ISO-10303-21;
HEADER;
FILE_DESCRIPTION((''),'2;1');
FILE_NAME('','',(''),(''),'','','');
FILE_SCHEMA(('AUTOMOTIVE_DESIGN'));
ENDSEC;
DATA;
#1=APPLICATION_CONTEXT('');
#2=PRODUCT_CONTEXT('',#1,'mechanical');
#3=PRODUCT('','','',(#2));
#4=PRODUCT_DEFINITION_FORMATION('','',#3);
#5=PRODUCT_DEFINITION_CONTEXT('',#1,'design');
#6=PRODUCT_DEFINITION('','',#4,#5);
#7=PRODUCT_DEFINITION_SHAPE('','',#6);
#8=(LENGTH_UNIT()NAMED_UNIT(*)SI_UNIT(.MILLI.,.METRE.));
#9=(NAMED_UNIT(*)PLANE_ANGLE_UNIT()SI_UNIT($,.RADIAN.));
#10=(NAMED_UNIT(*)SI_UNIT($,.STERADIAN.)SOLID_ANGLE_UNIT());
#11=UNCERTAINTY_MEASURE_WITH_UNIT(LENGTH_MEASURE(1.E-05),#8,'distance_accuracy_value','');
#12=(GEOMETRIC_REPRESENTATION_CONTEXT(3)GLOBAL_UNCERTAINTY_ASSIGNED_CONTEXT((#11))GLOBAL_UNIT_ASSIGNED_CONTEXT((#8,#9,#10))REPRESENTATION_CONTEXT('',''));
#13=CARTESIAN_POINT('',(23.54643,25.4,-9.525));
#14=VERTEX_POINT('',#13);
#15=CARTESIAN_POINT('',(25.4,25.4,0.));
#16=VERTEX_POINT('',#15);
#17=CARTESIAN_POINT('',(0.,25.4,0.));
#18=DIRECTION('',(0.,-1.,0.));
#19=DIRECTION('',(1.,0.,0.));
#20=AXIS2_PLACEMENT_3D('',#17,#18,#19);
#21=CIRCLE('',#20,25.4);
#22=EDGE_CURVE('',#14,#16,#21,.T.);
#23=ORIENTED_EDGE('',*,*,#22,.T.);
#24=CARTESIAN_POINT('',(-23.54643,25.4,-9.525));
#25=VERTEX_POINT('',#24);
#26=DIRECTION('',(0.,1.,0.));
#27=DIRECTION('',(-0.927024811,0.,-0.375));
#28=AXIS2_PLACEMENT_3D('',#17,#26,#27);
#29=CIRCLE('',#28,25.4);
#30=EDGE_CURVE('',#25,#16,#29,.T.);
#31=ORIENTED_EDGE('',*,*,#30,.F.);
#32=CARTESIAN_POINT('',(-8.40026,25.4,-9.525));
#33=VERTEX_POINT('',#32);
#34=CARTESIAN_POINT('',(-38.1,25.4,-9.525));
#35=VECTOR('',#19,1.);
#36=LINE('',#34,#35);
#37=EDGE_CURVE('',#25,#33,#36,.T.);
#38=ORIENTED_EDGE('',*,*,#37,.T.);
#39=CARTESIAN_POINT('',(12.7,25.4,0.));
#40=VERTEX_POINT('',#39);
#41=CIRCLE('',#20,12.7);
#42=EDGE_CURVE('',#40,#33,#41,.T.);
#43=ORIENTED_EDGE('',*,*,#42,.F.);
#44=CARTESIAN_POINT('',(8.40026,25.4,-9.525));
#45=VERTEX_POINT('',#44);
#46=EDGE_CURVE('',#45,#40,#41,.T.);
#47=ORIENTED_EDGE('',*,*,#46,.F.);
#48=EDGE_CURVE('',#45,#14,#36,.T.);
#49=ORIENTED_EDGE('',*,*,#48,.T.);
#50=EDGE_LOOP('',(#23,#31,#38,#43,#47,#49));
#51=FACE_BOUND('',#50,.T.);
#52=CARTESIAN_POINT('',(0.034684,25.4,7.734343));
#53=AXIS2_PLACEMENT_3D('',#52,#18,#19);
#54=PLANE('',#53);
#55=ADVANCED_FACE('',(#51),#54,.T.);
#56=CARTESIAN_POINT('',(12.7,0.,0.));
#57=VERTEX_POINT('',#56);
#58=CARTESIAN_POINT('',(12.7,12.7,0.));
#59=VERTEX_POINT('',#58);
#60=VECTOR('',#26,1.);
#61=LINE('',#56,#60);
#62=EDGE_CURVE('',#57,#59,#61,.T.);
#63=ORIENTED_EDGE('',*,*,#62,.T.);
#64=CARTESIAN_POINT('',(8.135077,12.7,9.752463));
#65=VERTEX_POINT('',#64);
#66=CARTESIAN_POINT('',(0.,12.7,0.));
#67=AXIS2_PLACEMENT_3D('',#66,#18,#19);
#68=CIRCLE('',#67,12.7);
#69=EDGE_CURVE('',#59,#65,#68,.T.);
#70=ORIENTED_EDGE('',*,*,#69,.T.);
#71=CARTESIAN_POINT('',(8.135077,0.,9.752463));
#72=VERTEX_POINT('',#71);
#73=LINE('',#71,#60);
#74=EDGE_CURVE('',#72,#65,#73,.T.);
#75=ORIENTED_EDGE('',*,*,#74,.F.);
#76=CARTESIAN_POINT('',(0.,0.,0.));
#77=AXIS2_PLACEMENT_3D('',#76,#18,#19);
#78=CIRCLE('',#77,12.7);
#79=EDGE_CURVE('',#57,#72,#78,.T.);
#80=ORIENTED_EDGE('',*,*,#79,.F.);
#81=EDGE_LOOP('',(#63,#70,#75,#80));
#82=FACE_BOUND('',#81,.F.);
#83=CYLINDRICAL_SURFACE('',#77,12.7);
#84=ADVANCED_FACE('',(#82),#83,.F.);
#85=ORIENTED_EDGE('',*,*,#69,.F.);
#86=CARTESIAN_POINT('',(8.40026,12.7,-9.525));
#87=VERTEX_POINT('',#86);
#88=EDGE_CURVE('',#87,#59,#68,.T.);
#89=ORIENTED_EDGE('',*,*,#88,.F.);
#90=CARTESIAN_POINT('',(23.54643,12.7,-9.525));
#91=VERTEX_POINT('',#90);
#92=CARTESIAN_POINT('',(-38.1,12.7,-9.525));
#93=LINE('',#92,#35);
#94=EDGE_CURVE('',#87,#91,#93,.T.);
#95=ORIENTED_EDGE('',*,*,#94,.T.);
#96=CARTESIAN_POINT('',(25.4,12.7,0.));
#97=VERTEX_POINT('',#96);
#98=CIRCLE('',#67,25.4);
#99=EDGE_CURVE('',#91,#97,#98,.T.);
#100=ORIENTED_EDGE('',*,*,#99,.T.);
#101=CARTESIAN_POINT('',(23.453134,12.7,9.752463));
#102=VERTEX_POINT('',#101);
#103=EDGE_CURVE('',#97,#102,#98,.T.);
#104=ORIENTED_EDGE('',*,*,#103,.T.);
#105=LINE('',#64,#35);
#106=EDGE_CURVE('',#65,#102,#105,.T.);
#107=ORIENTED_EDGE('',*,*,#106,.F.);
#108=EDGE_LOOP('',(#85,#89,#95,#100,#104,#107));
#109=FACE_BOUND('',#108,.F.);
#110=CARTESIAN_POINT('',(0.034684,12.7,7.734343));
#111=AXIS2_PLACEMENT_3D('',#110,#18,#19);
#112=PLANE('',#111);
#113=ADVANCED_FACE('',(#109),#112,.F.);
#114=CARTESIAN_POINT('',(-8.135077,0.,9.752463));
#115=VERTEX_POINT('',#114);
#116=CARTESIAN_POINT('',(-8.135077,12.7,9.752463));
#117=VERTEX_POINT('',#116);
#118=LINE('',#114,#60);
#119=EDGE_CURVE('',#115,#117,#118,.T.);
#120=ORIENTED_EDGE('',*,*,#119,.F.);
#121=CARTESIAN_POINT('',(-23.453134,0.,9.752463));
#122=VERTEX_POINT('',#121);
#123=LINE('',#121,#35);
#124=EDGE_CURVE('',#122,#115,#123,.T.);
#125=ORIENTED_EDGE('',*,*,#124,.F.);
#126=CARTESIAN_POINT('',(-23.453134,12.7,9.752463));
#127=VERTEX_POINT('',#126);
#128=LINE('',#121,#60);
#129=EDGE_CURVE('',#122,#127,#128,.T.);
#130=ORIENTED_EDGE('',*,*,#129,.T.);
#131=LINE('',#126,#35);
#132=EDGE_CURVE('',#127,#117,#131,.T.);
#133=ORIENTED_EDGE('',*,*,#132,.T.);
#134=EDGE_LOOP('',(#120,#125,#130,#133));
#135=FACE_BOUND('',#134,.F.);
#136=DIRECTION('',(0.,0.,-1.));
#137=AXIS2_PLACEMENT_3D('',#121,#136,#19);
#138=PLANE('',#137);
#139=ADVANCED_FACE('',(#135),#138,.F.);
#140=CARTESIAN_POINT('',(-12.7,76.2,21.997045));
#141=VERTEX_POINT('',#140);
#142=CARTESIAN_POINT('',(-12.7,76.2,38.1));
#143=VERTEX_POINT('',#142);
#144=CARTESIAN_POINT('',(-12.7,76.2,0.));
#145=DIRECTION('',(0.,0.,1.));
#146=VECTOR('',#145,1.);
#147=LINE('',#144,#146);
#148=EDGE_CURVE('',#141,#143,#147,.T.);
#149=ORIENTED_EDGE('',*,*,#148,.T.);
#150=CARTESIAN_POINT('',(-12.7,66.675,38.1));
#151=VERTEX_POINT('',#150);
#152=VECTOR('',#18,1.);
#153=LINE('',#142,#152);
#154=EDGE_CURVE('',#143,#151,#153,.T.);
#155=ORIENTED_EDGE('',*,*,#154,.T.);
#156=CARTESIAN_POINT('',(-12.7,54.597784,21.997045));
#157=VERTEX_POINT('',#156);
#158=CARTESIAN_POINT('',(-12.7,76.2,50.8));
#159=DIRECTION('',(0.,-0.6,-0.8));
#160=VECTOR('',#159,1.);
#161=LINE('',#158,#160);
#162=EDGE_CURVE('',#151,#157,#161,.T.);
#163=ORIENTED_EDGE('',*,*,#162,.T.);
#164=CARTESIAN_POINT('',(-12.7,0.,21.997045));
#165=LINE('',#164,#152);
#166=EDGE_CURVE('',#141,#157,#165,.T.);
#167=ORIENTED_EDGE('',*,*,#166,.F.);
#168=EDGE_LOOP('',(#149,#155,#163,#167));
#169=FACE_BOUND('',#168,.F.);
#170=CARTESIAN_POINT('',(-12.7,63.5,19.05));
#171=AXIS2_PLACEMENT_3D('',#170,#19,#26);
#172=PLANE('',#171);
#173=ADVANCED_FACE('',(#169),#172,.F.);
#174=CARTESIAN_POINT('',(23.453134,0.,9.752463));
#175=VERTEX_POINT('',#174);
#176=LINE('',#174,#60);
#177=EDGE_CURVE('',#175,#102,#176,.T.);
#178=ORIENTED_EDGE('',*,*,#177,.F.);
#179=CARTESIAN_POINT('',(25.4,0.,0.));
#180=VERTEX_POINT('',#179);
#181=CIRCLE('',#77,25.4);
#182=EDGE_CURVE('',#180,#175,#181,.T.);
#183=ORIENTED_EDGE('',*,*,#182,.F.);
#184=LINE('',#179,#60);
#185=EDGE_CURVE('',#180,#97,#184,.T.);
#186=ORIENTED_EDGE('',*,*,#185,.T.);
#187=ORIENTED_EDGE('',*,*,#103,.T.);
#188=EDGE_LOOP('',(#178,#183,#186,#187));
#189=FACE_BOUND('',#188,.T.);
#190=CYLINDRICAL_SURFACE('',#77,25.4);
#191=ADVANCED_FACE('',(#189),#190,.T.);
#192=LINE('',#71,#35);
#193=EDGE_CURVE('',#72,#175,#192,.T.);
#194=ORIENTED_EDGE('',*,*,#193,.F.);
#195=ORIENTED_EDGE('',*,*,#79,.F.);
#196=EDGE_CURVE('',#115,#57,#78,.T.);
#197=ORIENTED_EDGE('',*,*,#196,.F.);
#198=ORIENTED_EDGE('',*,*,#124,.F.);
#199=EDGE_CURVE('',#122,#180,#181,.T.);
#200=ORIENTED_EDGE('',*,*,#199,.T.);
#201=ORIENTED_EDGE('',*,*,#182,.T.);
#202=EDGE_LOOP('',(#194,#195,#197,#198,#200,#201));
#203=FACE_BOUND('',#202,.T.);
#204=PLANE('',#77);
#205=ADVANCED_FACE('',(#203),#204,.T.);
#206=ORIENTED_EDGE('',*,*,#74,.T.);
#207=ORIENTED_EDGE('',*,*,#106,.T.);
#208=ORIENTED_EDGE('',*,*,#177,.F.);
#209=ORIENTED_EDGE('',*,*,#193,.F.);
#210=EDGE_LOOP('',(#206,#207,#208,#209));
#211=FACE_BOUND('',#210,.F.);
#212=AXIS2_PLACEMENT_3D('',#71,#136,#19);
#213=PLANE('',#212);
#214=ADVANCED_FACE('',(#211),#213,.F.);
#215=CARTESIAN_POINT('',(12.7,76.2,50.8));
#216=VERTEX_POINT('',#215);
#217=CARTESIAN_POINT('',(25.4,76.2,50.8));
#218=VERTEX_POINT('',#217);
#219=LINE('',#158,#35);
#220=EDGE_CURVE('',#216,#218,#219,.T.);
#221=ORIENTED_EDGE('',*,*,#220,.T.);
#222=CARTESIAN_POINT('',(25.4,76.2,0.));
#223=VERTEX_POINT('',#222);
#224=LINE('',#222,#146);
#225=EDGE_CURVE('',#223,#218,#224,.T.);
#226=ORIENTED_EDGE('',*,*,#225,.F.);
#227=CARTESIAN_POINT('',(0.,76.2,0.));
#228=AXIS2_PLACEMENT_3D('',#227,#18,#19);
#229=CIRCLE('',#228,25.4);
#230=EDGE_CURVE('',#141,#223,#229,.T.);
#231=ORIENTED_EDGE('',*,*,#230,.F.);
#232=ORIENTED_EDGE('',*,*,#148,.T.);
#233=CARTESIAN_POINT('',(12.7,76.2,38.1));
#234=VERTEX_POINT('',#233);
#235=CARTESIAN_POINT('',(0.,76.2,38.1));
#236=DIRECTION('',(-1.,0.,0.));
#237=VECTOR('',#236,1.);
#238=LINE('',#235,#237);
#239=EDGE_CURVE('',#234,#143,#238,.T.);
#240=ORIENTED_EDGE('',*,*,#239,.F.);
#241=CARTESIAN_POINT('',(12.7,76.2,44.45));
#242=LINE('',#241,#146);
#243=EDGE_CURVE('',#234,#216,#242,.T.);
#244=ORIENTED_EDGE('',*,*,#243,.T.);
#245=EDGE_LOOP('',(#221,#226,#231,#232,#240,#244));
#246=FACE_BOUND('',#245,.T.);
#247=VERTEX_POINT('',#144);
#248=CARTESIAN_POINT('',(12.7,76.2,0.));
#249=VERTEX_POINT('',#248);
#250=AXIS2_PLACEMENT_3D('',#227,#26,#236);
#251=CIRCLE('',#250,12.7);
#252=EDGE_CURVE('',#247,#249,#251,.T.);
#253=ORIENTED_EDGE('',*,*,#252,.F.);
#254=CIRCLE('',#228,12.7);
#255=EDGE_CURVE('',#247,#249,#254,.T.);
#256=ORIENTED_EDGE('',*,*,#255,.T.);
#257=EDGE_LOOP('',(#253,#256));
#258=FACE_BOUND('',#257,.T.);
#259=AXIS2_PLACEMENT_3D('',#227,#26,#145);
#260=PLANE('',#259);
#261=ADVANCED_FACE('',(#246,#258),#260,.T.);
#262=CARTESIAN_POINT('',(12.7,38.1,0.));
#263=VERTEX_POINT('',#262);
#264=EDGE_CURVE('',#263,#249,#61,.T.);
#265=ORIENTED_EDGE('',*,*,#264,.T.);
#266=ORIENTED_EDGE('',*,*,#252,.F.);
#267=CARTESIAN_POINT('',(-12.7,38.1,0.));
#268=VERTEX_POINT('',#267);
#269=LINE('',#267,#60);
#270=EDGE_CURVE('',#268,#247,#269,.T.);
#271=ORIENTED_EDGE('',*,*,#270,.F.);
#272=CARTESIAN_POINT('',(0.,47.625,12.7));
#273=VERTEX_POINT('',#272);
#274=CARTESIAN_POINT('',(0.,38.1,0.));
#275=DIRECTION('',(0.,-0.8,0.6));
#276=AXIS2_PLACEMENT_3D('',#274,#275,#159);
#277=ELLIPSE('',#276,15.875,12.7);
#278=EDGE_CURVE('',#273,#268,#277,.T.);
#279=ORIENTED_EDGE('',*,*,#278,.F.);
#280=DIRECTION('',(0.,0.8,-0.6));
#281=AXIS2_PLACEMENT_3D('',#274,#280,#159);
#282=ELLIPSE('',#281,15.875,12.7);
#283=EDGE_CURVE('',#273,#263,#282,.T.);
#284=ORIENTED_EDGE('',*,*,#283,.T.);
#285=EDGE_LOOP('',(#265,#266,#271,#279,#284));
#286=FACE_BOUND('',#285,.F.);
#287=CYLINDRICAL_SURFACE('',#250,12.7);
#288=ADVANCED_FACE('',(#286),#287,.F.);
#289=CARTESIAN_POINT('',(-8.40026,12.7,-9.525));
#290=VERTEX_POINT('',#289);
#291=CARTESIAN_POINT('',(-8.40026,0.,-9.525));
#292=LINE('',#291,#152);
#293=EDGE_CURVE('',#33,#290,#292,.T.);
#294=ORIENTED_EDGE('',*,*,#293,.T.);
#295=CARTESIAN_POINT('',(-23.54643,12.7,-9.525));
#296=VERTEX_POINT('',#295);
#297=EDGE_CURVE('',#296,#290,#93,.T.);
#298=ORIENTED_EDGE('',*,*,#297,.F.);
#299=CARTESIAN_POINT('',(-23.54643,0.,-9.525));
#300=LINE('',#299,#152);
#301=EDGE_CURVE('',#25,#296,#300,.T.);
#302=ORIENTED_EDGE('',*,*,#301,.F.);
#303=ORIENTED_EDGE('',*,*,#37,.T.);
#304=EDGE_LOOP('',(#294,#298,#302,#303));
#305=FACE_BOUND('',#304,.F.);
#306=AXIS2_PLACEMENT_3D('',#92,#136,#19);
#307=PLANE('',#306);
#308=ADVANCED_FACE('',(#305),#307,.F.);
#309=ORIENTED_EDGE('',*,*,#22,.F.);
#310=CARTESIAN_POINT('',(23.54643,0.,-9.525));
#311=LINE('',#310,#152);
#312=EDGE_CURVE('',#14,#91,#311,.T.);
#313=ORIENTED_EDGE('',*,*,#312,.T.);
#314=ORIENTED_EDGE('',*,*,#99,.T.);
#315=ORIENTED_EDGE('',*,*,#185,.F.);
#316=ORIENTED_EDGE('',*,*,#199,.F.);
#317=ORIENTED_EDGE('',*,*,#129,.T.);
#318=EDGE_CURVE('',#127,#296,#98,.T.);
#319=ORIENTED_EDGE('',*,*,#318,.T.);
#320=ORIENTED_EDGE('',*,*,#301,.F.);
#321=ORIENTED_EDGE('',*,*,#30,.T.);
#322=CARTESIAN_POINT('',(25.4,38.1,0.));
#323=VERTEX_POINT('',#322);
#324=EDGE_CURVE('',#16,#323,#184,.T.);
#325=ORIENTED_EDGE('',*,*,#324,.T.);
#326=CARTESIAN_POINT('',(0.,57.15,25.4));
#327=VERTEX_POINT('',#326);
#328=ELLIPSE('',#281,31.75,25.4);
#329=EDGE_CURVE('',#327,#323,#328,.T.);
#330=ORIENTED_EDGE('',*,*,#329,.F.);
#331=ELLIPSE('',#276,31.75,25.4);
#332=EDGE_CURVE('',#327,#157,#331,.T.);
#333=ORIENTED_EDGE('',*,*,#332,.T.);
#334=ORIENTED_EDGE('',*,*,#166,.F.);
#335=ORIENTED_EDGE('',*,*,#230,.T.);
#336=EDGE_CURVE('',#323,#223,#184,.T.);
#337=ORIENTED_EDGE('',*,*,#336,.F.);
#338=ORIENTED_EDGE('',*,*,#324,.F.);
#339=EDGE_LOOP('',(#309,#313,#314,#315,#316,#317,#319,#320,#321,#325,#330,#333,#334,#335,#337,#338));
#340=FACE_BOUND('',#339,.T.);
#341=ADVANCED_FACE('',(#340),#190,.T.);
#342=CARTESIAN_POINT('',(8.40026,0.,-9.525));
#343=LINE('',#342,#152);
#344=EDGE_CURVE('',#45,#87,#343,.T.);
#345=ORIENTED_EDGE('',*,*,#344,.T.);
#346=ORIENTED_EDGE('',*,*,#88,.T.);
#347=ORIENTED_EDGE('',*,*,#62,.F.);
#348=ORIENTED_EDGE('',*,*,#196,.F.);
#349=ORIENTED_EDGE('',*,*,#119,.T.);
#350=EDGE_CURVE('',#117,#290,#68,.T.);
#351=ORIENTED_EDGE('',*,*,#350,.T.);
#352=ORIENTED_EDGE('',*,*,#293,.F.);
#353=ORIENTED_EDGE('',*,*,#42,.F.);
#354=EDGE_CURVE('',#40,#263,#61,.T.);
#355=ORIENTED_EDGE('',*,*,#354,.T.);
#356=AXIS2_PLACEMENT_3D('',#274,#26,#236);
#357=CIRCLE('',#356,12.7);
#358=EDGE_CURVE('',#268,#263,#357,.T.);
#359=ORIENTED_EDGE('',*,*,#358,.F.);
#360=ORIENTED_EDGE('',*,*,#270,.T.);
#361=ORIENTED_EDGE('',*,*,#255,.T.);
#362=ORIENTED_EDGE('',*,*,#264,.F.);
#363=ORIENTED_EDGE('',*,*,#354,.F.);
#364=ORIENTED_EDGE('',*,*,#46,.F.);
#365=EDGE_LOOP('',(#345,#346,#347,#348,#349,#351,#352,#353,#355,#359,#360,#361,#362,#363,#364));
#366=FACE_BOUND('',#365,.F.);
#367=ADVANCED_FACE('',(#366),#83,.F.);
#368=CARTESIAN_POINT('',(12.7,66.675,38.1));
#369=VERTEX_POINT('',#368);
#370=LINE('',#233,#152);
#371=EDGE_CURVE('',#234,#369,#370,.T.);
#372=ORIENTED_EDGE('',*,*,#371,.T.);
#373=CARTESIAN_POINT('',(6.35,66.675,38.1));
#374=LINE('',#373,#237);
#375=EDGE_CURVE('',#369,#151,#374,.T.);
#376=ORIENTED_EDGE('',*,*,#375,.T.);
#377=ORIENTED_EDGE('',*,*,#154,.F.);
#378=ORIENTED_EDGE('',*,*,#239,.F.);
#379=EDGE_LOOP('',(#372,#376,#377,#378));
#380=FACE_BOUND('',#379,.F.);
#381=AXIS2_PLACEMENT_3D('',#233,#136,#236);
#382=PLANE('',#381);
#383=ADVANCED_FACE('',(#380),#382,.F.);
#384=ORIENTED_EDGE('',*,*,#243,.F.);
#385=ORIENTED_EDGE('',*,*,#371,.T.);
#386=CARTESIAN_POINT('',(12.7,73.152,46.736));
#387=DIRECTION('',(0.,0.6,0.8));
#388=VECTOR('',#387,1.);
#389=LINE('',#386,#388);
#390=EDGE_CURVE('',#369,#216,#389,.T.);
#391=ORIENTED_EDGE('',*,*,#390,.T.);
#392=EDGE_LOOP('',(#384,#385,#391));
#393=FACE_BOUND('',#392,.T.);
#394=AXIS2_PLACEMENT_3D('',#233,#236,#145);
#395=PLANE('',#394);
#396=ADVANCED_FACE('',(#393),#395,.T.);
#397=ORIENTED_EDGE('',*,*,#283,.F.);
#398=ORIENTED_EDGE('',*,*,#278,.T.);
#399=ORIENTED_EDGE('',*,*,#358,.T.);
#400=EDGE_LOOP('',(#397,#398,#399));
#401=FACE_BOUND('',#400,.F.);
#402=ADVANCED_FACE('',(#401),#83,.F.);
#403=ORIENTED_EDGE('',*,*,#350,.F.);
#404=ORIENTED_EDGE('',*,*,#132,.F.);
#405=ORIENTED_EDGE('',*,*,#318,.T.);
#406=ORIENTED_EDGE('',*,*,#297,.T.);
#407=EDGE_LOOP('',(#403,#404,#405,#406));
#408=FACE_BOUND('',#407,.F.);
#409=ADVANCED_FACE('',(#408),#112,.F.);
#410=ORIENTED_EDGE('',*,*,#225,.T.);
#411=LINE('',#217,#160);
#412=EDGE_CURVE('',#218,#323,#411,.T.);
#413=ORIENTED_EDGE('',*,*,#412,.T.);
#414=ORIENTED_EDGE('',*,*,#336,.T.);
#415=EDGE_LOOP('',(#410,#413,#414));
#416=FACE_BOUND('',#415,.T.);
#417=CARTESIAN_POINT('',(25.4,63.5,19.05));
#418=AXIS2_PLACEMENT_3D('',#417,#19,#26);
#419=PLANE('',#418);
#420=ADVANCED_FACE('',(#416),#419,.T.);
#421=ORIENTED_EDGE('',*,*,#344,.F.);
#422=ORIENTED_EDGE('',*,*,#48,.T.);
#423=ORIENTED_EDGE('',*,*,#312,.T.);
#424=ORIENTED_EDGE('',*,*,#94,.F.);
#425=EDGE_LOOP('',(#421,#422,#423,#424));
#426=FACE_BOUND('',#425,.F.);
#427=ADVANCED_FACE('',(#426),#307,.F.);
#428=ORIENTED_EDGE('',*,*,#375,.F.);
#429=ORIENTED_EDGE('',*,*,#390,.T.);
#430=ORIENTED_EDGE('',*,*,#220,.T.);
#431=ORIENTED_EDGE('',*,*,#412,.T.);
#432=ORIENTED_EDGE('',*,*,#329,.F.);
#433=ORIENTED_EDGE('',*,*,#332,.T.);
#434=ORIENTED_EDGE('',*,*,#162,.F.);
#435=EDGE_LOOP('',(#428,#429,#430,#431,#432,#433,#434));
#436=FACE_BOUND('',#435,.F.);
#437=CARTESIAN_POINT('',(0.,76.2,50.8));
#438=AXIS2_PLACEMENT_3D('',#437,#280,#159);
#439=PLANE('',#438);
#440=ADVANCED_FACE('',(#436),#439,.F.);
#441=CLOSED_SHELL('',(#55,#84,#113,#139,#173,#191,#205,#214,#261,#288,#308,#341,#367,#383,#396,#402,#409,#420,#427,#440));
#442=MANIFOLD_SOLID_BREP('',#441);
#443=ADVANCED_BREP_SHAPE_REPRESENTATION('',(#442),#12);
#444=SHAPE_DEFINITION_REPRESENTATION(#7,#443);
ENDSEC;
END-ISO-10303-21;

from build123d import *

# Parameters (mm, degrees)
F0_R          = 25.4
F0_R_2        = 12.7
F1_DEPTH      = 76.2
F3_DEPTH      = 12.7
F5_START      = -12.7
F5_DEPTH      = 12.7
F7_DEPTH      = 25.4
F7_DEPTH_BACK = 12.7
F9_DEPTH      = 38.1
F10_W         = 25.4
F10_H         = 12.7
F11_DEPTH     = 25.4


with BuildPart() as f1:
    # F0 (on Front) → F1 (new body)
    with BuildSketch(Plane.XZ):
        Circle(F0_R)
        Circle(F0_R_2, mode=Mode.SUBTRACT)
    extrude(amount=-F1_DEPTH)

    # F2 (on face) → F3 (cut)
    with BuildSketch(Plane.XZ):
        with BuildLine():
            Line((8.1350766981, 9.7524626181), (23.4531335408, 9.7524626181))
            ThreePointArc((23.4531335408, 9.7524626181), (0, 25.4), (-23.4531335408, 9.7524626181))
            Line((-23.4531335408, 9.7524626181), (-8.1350766981, 9.7524626181))
            ThreePointArc((-8.1350766981, 9.7524626181), (0, 12.7), (8.1350766981, 9.7524626181))
        make_face()
    extrude(amount=-F3_DEPTH, mode=Mode.SUBTRACT)

    # F4 (on face) → F5 (cut)
    with BuildSketch(Plane.XZ.offset(F5_START)):
        with BuildLine():
            Line((23.5464301965, -9.525), (38.1, -9.525))
            Line((38.1, -9.525), (38.1, 25.4))
            Line((38.1, 25.4), (-38.1, 25.4))
            Line((-38.1, 25.4), (-38.1, -9.525))
            Line((-38.1, -9.525), (-23.5464301965, -9.525))
            ThreePointArc((-23.5464301965, -9.525), (-25.39970254, 0.1229263078), (-23.4531335408, 9.7524626181))
            Line((-23.4531335408, 9.7524626181), (-8.1350766981, 9.7524626181))
            ThreePointArc((-8.1350766981, 9.7524626181), (-12.698798549, 0.1746866087), (-8.4002604126, -9.525))
            Line((-8.4002604126, -9.525), (8.4002604126, -9.525))
            ThreePointArc((8.4002604126, -9.525), (11.5752604126, -5.2252604126), (12.7, 0))
            ThreePointArc((12.7, 0), (11.5022926859, 5.3839820735), (8.1350766981, 9.7524626181))
            Line((8.1350766981, 9.7524626181), (23.4531335408, 9.7524626181))
            ThreePointArc((23.4531335408, 9.7524626181), (24.908528579, 4.9724444724), (25.4, 0))
            ThreePointArc((25.4, 0), (24.9323016085, -4.8518384664), (23.5464301965, -9.525))
        make_face()
        with BuildLine():
            ThreePointArc((-23.4531335408, 9.7524626181), (-25.39970254, 0.1229263078), (-23.5464301965, -9.525))
            Line((-23.5464301965, -9.525), (-8.4002604126, -9.525))
            ThreePointArc((-8.4002604126, -9.525), (-12.698798549, 0.1746866087), (-8.1350766981, 9.7524626181))
            Line((-8.1350766981, 9.7524626181), (-23.4531335408, 9.7524626181))
        make_face()
        with BuildLine():
            Line((8.4002604126, -9.525), (23.5464301965, -9.525))
            ThreePointArc((23.5464301965, -9.525), (24.9323016085, -4.8518384664), (25.4, 0))
            ThreePointArc((25.4, 0), (24.908528579, 4.9724444724), (23.4531335408, 9.7524626181))
            Line((23.4531335408, 9.7524626181), (8.1350766981, 9.7524626181))
            ThreePointArc((8.1350766981, 9.7524626181), (11.5022926859, 5.3839820735), (12.7, 0))
            ThreePointArc((12.7, 0), (11.5752604126, -5.2252604126), (8.4002604126, -9.525))
        make_face()
    extrude(amount=-F5_DEPTH, mode=Mode.SUBTRACT)

    # F6 (on Right) → F7 (join, two sides)
    with BuildSketch(Plane.YZ) as f7_sk:
        Polygon((38.1, 0), (76.2, 0), (76.2, 50.8), align=None)
    extrude(amount=F7_DEPTH)
    extrude(f7_sk.sketch, amount=-F7_DEPTH_BACK)

    # F8 (on face) → F9 (cut)
    with BuildSketch(Plane(origin=(0, 76.2, 0), x_dir=(-1, 0, 0), z_dir=(0, 1, 0))):
        with BuildLine():
            Line((-12.7, 0), (12.7, 0))
            ThreePointArc((12.7, 0), (0, 12.7), (-12.7, 0))
        make_face()
    extrude(amount=-F9_DEPTH, mode=Mode.SUBTRACT)

    # F10 (on face) → F11 (cut)
    with BuildSketch(Plane(origin=(0, 76.2, 0), x_dir=(-1, 0, 0), z_dir=(0, 1, 0))):
        with Locations((0, 44.45)):
            Rectangle(F10_W, F10_H)
    extrude(amount=-F11_DEPTH, mode=Mode.SUBTRACT)


solid = f1.part
